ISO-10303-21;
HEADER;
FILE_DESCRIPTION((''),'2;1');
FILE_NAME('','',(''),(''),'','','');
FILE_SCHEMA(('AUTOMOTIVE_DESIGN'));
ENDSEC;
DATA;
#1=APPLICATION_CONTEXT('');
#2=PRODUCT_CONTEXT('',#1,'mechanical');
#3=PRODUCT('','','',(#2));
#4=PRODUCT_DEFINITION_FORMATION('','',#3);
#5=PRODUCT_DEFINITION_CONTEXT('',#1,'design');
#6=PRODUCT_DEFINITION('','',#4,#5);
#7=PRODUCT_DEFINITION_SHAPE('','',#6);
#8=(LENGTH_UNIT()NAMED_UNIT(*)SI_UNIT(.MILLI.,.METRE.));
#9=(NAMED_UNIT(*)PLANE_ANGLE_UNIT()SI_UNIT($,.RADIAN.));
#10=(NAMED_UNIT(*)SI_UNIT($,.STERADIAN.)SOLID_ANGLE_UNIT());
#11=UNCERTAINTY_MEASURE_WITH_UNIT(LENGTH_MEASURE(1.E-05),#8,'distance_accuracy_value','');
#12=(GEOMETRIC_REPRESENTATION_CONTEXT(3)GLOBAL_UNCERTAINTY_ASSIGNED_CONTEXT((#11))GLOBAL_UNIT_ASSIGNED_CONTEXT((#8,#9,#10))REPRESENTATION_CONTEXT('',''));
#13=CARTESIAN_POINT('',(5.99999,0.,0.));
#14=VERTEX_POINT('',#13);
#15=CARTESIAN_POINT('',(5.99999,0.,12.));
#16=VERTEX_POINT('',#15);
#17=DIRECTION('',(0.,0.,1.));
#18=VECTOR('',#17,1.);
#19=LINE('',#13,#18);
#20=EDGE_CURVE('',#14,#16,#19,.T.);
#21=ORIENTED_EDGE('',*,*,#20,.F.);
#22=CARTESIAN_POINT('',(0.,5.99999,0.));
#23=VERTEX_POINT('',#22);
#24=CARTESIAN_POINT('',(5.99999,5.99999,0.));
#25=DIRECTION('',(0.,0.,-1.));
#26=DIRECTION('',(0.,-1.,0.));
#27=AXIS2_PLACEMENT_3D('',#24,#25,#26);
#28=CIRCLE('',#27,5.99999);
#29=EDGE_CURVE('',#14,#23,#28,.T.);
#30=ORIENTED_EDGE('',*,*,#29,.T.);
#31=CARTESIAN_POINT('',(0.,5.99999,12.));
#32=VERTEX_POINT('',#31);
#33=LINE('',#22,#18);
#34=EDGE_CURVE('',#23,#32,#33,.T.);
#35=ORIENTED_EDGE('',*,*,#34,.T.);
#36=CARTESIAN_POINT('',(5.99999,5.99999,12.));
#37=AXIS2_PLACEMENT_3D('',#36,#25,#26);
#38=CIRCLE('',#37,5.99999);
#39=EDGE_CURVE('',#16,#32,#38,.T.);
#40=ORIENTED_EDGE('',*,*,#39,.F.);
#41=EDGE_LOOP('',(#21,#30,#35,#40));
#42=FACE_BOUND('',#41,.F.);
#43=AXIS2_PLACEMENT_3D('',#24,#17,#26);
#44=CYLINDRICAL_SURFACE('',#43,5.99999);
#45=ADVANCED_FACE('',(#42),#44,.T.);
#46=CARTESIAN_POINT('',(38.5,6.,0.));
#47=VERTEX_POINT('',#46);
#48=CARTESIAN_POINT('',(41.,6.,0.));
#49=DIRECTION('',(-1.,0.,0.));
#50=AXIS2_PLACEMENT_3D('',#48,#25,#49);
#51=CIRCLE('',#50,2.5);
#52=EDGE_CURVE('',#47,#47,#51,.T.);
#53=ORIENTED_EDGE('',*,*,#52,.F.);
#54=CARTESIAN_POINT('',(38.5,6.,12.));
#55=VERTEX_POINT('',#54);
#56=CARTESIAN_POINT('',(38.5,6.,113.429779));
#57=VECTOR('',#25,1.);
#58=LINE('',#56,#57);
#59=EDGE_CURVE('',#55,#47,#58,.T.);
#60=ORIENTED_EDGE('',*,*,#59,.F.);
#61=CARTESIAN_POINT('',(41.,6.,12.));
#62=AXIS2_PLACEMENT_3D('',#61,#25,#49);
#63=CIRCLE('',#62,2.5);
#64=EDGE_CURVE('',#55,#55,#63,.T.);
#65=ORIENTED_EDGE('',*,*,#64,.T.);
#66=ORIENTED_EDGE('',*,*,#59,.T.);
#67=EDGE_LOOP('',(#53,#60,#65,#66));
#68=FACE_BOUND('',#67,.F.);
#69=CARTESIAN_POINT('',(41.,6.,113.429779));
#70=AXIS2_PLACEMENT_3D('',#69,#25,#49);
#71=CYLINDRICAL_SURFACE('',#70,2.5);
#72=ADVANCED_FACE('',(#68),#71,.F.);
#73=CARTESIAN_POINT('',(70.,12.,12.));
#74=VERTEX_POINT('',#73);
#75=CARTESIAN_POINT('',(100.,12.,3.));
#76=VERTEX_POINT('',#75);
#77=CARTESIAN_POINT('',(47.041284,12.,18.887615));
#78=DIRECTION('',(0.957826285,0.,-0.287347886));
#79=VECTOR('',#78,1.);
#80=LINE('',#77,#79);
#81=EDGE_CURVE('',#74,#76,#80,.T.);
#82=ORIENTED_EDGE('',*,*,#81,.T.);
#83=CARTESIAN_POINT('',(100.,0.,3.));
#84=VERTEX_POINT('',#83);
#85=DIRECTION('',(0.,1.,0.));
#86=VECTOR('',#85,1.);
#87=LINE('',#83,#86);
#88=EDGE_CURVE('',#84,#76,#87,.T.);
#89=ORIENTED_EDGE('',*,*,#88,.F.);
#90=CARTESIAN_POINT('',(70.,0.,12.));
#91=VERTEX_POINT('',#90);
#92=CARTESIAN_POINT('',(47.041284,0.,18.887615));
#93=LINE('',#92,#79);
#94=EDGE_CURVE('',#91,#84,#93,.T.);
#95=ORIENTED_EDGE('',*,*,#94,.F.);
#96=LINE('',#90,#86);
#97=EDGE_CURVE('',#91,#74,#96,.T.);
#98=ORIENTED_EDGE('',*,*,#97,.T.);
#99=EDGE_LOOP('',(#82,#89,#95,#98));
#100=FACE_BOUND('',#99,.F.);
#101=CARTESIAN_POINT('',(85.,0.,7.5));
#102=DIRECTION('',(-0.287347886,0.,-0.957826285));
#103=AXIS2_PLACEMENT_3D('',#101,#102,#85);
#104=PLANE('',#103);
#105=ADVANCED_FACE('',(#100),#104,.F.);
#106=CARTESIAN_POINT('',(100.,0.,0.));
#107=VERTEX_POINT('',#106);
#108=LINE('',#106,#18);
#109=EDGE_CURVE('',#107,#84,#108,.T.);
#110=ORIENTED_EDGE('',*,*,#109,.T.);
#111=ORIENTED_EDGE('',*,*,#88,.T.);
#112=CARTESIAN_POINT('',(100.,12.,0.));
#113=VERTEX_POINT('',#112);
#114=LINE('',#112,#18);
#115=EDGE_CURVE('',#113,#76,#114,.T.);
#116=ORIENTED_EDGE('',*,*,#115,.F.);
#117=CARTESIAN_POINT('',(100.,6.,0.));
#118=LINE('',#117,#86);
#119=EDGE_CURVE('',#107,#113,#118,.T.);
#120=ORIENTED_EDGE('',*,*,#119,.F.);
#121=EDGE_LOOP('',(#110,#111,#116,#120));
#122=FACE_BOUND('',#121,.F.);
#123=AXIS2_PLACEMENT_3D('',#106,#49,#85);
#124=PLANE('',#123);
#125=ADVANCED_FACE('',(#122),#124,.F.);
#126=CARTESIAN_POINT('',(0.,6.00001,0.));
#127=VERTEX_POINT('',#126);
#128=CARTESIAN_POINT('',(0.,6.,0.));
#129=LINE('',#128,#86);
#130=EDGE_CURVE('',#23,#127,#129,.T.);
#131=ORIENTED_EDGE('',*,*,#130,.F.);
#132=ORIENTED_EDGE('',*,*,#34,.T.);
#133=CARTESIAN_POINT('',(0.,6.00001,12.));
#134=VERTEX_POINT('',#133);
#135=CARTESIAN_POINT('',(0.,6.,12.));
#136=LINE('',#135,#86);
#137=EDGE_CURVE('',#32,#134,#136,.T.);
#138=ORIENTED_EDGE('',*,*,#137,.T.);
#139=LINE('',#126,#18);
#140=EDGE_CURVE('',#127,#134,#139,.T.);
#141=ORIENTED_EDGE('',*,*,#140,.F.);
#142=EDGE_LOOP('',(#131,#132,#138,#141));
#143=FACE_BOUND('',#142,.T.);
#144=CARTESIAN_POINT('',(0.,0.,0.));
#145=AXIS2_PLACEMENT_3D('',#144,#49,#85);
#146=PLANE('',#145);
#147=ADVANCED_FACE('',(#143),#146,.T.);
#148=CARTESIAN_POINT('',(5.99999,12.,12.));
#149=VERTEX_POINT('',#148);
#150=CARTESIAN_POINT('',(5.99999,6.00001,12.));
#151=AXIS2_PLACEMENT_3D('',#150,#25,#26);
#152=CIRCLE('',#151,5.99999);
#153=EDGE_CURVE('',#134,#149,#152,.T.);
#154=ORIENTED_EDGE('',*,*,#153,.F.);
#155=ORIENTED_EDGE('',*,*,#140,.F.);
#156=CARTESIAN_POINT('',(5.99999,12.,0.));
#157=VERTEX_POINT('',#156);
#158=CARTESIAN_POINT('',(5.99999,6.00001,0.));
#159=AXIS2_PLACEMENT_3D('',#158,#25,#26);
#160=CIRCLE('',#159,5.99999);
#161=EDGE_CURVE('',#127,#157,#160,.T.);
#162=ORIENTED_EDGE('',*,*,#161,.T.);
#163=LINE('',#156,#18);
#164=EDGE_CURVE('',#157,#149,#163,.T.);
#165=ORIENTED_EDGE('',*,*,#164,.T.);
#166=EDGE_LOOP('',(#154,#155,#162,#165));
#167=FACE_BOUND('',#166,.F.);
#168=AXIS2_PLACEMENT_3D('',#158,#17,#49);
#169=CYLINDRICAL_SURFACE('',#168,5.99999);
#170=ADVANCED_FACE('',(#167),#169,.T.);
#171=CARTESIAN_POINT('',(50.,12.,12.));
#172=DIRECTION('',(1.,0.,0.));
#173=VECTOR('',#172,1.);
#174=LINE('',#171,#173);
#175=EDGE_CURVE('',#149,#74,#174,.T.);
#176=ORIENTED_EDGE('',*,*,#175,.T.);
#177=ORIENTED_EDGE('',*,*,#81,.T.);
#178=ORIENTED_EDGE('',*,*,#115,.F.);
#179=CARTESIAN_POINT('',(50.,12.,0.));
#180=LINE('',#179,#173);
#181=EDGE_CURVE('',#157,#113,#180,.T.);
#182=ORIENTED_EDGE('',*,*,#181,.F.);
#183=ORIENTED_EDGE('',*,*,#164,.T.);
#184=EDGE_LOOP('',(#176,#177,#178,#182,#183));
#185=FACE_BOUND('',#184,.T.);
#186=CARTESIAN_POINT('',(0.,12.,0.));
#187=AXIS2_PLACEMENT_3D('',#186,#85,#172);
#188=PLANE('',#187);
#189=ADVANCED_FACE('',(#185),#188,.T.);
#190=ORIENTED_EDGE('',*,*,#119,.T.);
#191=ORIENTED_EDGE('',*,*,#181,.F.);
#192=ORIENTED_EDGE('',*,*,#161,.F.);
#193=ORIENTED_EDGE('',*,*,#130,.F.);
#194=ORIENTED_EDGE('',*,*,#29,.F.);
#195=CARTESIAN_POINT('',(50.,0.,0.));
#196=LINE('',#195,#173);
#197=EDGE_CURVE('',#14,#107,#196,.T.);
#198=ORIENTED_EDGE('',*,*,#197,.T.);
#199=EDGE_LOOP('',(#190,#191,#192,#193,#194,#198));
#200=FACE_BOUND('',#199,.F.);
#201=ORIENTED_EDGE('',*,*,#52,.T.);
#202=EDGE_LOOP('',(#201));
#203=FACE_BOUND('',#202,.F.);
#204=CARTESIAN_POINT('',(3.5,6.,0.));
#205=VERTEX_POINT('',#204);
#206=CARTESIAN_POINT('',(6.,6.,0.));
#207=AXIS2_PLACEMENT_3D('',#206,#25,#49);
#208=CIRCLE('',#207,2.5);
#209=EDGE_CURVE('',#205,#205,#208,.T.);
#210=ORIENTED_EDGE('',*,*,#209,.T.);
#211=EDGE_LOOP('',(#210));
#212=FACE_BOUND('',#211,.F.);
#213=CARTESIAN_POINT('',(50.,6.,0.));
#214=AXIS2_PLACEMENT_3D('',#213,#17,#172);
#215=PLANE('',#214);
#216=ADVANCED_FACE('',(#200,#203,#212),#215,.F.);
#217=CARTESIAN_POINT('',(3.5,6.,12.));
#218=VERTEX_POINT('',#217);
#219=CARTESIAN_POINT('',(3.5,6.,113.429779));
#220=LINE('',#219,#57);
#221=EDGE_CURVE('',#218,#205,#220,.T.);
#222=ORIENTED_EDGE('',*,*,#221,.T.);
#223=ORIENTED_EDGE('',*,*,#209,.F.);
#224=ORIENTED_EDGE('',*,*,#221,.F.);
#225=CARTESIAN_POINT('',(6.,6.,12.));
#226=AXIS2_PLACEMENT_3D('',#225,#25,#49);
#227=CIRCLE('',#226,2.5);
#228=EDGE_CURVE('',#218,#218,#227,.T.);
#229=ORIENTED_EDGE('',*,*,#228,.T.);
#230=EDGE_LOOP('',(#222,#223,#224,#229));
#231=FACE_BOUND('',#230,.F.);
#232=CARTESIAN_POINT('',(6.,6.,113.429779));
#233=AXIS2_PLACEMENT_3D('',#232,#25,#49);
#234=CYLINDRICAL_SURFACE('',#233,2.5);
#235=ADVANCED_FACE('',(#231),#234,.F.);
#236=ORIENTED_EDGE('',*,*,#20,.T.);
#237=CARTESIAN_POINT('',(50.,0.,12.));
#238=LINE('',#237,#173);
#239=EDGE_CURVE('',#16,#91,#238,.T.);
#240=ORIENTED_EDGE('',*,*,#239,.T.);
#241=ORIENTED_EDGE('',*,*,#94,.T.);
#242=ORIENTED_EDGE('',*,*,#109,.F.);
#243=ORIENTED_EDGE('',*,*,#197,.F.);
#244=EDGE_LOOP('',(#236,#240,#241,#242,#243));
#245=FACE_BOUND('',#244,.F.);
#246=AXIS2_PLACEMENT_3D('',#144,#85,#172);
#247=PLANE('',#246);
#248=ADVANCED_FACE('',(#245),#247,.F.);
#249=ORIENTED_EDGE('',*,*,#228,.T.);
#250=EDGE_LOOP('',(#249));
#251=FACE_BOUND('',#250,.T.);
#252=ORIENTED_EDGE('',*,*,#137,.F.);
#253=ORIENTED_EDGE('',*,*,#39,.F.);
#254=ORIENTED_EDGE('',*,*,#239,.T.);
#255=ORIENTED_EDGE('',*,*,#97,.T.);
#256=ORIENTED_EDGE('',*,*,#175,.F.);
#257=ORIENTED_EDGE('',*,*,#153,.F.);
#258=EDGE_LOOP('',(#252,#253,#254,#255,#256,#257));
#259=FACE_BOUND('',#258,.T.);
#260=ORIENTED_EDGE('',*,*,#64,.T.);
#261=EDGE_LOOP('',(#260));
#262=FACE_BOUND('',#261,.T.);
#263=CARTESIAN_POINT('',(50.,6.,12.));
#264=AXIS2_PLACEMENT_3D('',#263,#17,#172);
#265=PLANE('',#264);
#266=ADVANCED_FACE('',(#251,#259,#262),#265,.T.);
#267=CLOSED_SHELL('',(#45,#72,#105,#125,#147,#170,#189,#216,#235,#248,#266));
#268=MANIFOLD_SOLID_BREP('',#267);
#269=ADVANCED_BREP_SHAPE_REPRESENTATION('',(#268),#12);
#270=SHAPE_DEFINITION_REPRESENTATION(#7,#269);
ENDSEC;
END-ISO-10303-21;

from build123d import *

# Parameters (mm, degrees)
F0_W     = 100
F0_H     = 12
F1_DEPTH = 12
F2_SIZE2 = 9
F2_SIZE  = 30
F3_R     = 5.99999
F5_D     = 5


# Not quite as in the source:
# - a fillet or chamfer is up to 0.001 mm smaller than in the source, because OpenCascade refuses the exact size


with BuildPart() as f1:
    # F0 (on Top) → F1 (new body)
    with BuildSketch(Plane.XY):
        with Locations((50, 6)):
            Rectangle(F0_W, F0_H)
    extrude(amount=F1_DEPTH)

    # F2
    f2_edges = [f1.edges().sort_by_distance(p)[0] for p in [
        (100, 6, 12),
    ]]
    f2_side = f1.faces().sort_by_distance((50, 6, 12))[0]
    chamfer(f2_edges, length=F2_SIZE, length2=F2_SIZE2, reference=f2_side)

    # F3 (radius 6 in the source; OpenCascade refuses exactly that, so slightly less here)
    f3_edges = [f1.edges().sort_by_distance(p)[0] for p in [
        (0, 0, 6),
        (0, 12, 6),
    ]]
    fillet(f3_edges, radius=F3_R)

    # F5 (through all)
    with Locations(Plane.XY.offset(12)):
        with Locations((6, 6), (41, 6)):
            Hole(F5_D / 2)


solid = f1.part
